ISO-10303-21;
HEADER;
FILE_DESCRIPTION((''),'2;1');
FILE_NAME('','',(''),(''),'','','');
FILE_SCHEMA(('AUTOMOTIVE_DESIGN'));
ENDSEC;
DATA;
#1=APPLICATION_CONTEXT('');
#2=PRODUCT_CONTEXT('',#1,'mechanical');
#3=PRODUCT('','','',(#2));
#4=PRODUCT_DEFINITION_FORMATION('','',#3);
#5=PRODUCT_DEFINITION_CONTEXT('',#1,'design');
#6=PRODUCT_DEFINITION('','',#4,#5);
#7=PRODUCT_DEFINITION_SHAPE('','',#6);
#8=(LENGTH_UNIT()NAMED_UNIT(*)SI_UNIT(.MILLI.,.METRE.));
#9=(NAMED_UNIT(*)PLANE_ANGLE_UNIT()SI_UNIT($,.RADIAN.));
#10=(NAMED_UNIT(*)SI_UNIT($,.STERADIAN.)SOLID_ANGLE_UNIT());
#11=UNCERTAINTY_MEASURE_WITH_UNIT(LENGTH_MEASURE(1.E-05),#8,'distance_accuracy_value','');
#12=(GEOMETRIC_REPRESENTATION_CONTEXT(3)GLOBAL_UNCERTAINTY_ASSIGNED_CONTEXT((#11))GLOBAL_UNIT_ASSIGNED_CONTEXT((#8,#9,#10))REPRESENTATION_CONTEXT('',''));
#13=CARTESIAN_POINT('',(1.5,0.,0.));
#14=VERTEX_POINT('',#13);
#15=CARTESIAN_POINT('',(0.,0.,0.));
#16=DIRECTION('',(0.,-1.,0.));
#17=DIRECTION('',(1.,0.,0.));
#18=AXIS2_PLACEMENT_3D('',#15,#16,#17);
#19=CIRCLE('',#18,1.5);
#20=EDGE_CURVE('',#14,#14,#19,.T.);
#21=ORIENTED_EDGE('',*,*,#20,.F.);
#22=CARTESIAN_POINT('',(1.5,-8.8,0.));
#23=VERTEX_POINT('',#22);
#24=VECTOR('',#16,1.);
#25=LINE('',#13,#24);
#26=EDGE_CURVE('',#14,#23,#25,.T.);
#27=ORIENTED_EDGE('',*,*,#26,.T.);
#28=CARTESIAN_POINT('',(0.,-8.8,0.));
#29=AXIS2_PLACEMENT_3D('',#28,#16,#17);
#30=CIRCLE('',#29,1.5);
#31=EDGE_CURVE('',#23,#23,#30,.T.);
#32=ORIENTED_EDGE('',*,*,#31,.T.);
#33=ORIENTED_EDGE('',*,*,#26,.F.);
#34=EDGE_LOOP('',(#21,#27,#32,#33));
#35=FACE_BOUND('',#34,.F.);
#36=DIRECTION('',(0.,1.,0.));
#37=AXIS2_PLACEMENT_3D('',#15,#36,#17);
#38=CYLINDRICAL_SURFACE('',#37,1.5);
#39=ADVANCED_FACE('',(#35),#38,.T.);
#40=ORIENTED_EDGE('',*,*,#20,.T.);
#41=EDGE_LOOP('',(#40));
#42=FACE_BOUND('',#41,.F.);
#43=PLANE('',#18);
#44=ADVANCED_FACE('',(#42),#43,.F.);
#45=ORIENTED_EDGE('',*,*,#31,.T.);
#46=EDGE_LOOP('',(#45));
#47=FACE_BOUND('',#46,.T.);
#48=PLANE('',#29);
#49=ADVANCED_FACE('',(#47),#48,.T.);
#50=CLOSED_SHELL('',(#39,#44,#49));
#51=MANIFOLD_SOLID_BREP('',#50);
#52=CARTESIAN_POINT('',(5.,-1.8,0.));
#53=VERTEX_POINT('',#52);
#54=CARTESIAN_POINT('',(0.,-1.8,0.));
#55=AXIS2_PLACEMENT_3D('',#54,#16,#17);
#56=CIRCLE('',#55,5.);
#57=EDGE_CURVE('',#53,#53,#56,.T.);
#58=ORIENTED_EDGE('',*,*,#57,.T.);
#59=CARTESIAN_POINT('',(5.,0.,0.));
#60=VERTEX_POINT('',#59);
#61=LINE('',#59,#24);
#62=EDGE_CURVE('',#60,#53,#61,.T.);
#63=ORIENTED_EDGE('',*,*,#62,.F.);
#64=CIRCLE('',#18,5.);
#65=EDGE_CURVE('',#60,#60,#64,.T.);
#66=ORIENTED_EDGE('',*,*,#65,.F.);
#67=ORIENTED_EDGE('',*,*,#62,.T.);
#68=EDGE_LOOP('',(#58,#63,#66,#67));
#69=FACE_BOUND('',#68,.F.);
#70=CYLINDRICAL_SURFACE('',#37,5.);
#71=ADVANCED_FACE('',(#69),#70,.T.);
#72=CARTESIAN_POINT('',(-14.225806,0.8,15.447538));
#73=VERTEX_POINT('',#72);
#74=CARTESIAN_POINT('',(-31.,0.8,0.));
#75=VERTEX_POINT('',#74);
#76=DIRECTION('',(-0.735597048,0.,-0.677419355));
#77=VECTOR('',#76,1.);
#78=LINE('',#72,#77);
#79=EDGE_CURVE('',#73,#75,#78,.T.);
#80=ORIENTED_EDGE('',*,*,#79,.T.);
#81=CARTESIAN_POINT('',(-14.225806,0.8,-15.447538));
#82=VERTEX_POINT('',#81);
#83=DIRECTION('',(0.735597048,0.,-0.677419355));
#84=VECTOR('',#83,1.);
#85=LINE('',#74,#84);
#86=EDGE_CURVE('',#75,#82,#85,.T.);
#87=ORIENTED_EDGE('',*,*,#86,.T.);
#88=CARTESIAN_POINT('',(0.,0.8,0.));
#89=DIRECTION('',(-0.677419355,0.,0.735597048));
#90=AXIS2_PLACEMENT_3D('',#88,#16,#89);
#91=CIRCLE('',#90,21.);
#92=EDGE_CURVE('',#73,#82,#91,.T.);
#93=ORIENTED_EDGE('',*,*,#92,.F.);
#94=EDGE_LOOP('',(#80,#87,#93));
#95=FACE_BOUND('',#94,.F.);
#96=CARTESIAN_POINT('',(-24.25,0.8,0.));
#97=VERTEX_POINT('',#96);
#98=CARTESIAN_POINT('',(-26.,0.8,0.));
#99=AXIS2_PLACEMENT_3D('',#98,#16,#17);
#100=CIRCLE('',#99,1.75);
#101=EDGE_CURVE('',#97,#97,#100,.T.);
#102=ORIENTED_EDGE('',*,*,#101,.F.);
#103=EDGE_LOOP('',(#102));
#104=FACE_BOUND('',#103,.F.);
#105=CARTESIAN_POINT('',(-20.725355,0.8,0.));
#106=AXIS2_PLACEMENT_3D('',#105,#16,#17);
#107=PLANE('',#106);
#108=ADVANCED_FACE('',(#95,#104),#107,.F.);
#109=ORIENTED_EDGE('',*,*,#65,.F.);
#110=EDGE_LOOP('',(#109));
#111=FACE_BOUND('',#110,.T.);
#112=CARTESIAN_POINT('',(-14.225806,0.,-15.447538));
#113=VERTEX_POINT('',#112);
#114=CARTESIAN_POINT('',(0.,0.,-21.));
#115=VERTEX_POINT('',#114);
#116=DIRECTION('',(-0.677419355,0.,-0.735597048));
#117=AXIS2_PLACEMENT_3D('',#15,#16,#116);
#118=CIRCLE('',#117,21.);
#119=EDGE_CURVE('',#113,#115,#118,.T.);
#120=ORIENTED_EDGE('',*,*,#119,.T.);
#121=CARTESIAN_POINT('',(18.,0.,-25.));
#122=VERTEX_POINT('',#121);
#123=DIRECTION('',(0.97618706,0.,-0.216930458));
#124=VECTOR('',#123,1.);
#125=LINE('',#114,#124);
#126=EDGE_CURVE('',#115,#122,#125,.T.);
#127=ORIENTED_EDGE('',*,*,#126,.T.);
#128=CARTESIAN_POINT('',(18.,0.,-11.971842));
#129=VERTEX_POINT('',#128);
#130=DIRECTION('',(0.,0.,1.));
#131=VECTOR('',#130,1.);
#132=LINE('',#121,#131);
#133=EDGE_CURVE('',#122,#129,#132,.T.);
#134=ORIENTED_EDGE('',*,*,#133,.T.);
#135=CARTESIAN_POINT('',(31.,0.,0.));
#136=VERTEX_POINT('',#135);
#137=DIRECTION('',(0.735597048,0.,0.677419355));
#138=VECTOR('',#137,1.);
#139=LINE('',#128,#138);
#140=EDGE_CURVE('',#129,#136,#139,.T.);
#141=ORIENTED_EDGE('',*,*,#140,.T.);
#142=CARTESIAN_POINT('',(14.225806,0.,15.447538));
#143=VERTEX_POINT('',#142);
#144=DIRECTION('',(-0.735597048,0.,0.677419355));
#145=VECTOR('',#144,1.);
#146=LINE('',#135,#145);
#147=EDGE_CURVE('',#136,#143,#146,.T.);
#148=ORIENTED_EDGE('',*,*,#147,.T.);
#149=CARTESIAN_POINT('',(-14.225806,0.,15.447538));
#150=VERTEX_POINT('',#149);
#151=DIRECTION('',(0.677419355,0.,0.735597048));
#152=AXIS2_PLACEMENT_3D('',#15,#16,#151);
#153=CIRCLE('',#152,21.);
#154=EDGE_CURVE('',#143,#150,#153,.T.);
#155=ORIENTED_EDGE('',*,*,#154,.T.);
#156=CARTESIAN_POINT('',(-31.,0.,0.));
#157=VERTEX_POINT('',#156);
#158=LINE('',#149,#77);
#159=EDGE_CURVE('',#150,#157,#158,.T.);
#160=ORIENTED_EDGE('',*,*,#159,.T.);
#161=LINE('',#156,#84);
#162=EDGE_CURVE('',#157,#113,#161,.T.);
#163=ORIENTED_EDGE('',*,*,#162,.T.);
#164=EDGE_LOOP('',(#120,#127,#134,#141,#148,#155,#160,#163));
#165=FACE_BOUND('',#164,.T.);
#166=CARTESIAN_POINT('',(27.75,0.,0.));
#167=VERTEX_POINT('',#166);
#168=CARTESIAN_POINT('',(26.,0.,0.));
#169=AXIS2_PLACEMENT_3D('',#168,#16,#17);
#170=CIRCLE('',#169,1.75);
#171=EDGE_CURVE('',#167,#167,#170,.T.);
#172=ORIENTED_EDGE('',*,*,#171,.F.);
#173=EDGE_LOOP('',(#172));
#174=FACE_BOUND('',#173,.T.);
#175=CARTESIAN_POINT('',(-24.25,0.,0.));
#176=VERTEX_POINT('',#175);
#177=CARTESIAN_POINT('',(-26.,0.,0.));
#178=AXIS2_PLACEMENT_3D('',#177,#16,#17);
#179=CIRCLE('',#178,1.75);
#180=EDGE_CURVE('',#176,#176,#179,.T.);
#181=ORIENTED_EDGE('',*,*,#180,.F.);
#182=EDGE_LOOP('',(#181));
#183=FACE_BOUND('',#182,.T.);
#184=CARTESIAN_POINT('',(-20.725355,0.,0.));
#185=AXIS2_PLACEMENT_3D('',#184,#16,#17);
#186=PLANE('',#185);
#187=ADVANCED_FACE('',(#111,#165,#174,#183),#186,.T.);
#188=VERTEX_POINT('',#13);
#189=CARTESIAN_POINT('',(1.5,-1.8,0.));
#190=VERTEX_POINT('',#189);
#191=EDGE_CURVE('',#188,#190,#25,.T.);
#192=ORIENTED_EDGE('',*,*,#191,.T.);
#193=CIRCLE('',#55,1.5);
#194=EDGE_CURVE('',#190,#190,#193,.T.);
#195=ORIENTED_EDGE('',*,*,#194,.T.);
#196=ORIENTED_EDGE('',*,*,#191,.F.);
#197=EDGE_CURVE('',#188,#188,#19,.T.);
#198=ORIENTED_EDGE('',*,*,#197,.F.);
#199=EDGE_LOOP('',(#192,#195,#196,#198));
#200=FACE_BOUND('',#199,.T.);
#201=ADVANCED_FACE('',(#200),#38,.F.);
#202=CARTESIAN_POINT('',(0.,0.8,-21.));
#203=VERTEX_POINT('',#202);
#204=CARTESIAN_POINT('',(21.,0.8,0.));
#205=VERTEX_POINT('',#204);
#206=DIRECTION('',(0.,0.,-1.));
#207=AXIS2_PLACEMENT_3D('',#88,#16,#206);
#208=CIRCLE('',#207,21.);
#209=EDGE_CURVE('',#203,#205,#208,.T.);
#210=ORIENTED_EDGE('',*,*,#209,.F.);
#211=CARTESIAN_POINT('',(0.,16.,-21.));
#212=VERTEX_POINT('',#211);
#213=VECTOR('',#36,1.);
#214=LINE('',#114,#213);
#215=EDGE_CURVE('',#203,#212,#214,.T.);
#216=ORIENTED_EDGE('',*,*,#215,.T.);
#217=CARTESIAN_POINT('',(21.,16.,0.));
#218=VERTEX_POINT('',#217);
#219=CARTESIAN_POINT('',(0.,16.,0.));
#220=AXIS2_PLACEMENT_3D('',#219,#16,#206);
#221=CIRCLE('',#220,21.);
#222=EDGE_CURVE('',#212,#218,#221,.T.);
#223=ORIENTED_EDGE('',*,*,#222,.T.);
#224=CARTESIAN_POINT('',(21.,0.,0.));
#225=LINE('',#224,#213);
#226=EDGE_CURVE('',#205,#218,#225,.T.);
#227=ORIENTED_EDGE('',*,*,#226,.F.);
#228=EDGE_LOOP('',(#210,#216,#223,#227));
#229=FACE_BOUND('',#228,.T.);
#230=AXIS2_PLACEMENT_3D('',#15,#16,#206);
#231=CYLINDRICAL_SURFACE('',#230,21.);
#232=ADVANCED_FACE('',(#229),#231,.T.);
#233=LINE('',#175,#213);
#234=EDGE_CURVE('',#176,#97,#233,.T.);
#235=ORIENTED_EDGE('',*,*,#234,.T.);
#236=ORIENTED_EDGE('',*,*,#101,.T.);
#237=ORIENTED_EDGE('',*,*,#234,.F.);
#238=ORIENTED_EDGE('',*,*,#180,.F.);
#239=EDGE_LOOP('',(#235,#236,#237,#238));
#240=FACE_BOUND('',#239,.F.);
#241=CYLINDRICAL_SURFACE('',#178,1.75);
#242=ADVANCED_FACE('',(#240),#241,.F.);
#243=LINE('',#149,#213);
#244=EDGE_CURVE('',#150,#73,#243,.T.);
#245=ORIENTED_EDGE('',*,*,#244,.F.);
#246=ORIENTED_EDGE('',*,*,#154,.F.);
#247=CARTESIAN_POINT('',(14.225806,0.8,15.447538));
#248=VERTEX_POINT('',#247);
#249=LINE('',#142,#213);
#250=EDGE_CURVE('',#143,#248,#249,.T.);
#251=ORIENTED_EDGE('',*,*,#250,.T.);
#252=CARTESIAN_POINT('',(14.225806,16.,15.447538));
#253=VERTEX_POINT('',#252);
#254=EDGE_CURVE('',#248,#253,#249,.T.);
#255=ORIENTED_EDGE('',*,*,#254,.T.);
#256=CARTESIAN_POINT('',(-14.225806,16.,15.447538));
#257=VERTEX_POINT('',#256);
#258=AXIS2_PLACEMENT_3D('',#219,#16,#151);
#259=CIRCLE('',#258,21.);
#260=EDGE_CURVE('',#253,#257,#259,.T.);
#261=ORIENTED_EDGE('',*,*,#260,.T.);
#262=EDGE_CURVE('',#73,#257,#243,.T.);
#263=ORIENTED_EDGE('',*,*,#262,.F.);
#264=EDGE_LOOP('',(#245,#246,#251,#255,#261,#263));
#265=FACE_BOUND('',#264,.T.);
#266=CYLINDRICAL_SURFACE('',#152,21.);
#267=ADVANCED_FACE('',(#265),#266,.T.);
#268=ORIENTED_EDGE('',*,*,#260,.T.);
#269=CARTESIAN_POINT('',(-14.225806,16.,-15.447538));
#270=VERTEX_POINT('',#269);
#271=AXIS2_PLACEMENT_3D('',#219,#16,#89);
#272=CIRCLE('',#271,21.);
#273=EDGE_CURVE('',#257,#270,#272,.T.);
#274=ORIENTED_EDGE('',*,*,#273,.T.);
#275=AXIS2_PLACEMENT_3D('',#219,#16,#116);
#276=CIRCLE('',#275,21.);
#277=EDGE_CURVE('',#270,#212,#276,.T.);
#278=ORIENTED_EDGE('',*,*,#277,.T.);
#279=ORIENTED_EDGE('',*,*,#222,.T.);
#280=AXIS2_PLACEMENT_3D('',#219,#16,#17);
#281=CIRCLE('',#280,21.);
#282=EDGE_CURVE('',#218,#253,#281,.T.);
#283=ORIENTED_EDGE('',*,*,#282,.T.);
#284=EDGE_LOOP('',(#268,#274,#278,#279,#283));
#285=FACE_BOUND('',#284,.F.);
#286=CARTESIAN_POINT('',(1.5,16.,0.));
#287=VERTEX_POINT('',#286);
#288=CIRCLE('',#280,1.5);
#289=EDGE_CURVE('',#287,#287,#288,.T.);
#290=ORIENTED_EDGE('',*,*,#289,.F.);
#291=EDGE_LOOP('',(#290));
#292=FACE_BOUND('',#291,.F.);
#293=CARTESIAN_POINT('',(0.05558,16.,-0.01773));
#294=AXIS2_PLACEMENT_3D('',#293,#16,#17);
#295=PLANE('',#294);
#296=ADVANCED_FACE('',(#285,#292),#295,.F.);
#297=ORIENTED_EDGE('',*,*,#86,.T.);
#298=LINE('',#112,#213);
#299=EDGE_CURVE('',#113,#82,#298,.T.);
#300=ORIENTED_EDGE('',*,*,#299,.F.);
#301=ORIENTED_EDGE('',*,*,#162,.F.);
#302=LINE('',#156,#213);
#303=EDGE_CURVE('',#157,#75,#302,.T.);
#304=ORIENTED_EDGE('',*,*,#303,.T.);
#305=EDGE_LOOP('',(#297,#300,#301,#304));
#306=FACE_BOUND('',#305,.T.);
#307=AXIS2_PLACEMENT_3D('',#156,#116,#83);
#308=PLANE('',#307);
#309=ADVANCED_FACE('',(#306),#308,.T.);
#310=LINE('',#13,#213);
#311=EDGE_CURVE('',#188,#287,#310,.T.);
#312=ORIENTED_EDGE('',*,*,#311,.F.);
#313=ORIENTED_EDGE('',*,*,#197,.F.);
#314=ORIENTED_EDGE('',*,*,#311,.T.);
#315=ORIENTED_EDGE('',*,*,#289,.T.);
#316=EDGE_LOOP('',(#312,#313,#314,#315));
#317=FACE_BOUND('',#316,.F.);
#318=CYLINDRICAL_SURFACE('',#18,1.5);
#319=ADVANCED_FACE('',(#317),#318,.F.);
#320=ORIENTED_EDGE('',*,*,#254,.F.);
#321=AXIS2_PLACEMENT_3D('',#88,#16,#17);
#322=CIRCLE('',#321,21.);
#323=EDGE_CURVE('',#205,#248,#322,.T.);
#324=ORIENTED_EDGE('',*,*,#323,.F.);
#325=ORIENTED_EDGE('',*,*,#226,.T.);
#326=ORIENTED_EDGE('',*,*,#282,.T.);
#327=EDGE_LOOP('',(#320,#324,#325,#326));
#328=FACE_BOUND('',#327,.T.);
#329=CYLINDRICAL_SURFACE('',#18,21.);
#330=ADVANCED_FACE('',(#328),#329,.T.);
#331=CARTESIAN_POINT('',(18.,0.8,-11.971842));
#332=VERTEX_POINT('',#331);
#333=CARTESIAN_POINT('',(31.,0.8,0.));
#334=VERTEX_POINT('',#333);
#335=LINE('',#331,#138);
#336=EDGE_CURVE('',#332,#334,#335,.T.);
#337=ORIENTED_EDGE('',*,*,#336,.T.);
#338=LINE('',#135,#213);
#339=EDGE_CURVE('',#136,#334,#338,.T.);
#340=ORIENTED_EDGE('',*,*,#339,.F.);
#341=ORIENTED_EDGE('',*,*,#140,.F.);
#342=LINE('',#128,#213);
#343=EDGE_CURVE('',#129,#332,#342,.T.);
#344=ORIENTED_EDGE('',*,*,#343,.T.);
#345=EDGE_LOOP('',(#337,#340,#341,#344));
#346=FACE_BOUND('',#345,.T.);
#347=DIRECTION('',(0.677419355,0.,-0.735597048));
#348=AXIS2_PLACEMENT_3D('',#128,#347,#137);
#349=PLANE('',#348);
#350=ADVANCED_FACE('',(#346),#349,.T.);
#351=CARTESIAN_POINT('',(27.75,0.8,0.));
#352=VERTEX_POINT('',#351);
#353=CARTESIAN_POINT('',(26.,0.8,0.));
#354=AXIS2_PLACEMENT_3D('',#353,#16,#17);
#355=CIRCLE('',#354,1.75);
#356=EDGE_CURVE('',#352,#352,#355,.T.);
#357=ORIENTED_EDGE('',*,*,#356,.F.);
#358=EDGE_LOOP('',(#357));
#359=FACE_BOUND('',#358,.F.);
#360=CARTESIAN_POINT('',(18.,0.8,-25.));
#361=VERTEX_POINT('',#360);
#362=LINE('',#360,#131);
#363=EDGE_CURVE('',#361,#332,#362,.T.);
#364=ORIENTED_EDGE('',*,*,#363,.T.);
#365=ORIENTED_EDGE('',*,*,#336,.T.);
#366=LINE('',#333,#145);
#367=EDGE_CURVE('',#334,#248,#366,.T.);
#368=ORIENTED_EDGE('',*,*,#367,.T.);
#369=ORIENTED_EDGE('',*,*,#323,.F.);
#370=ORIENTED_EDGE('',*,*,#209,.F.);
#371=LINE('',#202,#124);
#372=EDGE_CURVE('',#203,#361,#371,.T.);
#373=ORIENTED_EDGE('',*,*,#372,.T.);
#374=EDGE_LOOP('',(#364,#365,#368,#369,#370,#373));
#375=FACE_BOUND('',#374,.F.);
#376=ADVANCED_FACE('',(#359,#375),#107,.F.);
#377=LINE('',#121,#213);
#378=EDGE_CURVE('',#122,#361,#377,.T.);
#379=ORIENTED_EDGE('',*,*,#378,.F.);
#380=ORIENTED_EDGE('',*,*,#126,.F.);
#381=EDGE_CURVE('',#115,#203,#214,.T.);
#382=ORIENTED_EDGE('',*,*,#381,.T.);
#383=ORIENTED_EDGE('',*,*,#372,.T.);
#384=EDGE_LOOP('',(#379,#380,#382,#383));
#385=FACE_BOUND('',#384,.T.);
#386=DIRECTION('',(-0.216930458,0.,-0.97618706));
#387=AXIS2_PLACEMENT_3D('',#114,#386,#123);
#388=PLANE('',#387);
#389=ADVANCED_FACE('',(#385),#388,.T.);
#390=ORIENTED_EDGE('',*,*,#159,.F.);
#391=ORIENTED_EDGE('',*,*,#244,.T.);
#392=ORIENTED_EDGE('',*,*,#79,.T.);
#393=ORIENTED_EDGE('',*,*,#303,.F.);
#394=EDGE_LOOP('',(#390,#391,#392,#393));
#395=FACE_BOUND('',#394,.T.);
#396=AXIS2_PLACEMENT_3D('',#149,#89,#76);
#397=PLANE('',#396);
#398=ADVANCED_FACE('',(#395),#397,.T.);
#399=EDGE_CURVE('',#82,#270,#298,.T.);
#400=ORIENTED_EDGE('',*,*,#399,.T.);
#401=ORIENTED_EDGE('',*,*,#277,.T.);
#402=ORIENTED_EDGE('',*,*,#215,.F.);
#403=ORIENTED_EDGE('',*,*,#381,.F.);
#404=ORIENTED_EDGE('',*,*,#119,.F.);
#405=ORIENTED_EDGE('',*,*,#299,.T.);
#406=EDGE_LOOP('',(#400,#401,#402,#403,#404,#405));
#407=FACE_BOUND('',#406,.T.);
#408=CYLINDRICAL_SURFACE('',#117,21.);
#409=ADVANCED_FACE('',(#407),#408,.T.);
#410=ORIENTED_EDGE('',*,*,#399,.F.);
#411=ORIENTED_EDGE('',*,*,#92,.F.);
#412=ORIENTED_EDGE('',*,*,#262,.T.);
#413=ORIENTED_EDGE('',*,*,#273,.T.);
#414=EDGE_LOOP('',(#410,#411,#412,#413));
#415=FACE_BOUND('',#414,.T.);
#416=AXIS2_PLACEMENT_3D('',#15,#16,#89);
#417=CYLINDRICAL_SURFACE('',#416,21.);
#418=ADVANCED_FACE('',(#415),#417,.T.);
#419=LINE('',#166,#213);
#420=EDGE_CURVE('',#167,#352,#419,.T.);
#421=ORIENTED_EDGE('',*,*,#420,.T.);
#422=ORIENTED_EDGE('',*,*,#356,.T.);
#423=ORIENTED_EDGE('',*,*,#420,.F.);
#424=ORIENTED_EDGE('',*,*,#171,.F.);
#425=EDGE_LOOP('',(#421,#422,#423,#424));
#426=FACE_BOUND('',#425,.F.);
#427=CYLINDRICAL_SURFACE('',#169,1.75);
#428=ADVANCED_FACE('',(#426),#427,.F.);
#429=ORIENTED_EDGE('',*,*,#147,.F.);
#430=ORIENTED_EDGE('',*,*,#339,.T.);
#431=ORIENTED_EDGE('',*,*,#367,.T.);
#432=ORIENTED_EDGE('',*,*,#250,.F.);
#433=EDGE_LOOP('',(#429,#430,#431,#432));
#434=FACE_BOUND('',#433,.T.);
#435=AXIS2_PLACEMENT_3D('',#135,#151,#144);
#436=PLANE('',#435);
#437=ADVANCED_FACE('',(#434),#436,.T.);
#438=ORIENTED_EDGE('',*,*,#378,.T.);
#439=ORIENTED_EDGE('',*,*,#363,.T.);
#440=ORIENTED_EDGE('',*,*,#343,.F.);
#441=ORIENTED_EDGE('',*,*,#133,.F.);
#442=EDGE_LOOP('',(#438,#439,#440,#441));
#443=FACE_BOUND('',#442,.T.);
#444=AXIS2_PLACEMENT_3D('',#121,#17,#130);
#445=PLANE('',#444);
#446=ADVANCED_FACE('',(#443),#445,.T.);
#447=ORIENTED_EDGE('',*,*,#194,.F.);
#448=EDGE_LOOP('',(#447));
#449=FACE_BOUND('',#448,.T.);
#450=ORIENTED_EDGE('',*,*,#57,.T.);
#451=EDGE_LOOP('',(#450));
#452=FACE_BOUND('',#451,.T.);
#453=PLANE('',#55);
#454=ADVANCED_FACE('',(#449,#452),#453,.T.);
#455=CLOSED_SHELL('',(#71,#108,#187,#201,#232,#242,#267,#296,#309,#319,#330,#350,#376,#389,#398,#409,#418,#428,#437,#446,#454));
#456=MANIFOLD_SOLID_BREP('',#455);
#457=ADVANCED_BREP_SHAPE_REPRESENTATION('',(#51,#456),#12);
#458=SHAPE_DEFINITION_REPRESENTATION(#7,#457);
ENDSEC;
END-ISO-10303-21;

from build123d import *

# Parameters (mm, degrees)
F0_R     = 1.5
F1_DEPTH = 8.8
F0_R_2   = 5
F2_DEPTH = 1.8
F3_DEPTH = 16
F0_R_3   = 1.75
F4_DEPTH = 0.8


with BuildPart() as f1:
    # F0 (on Front) → F1 (new body)
    with BuildSketch(Plane.XZ):
        Circle(F0_R)
    extrude(amount=F1_DEPTH)


with BuildPart() as f2:
    # F0 (on Front) → F2 (new body)
    with BuildSketch(Plane.XZ):
        Circle(F0_R_2)
        Circle(F0_R, mode=Mode.SUBTRACT)
    extrude(amount=F2_DEPTH)

    # F0 (on Front) → F3 (join)
    with BuildSketch(Plane.XZ):
        with BuildLine():
            ThreePointArc((0, -21), (14.8492424049, -14.8492424049), (21, 0))
            ThreePointArc((21, 0), (19.2320297354, 8.4338029535), (14.2258064516, 15.4475380175))
            ThreePointArc((14.2258064516, 15.4475380175), (0, 21), (-14.2258064516, 15.4475380175))
            ThreePointArc((-14.2258064516, 15.4475380175), (-21, 0), (-14.2258064516, -15.4475380175))
            ThreePointArc((-14.2258064516, -15.4475380175), (-7.6354993823, -19.5626979015), (0, -21))
        make_face()
        Circle(F0_R_2, mode=Mode.SUBTRACT)
        Circle(F0_R_2)
        Circle(F0_R, mode=Mode.SUBTRACT)
    extrude(amount=-F3_DEPTH)

    # F0 (on Front) → F4 (join)
    with BuildSketch(Plane.XZ):
        with BuildLine():
            ThreePointArc((-14.2258064516, -15.4475380175), (-21, 0), (-14.2258064516, 15.4475380175))
            Line((-14.2258064516, 15.4475380175), (-31, 0))
            Line((-31, 0), (-14.2258064516, -15.4475380175))
        make_face()
        with Locations((-26, 0)):
            Circle(F0_R_3, mode=Mode.SUBTRACT)
        with BuildLine():
            ThreePointArc((14.2258064516, 15.4475380175), (19.2320297354, 8.4338029535), (21, 0))
            ThreePointArc((21, 0), (14.8492424049, -14.8492424049), (0, -21))
            Line((0, -21), (18, -25))
            Line((18, -25), (18, -11.9718419635))
            Line((18, -11.9718419635), (31, 0))
            Line((31, 0), (14.2258064516, 15.4475380175))
        make_face()
        with Locations((26, 0)):
            Circle(F0_R_3, mode=Mode.SUBTRACT)
        with BuildLine():
            ThreePointArc((0, -21), (14.8492424049, -14.8492424049), (21, 0))
            ThreePointArc((21, 0), (19.2320297354, 8.4338029535), (14.2258064516, 15.4475380175))
            ThreePointArc((14.2258064516, 15.4475380175), (0, 21), (-14.2258064516, 15.4475380175))
            ThreePointArc((-14.2258064516, 15.4475380175), (-21, 0), (-14.2258064516, -15.4475380175))
            ThreePointArc((-14.2258064516, -15.4475380175), (-7.6354993823, -19.5626979015), (0, -21))
        make_face()
        Circle(F0_R_2, mode=Mode.SUBTRACT)
    extrude(amount=-F4_DEPTH)


solid = Compound([f1.part, f2.part])
